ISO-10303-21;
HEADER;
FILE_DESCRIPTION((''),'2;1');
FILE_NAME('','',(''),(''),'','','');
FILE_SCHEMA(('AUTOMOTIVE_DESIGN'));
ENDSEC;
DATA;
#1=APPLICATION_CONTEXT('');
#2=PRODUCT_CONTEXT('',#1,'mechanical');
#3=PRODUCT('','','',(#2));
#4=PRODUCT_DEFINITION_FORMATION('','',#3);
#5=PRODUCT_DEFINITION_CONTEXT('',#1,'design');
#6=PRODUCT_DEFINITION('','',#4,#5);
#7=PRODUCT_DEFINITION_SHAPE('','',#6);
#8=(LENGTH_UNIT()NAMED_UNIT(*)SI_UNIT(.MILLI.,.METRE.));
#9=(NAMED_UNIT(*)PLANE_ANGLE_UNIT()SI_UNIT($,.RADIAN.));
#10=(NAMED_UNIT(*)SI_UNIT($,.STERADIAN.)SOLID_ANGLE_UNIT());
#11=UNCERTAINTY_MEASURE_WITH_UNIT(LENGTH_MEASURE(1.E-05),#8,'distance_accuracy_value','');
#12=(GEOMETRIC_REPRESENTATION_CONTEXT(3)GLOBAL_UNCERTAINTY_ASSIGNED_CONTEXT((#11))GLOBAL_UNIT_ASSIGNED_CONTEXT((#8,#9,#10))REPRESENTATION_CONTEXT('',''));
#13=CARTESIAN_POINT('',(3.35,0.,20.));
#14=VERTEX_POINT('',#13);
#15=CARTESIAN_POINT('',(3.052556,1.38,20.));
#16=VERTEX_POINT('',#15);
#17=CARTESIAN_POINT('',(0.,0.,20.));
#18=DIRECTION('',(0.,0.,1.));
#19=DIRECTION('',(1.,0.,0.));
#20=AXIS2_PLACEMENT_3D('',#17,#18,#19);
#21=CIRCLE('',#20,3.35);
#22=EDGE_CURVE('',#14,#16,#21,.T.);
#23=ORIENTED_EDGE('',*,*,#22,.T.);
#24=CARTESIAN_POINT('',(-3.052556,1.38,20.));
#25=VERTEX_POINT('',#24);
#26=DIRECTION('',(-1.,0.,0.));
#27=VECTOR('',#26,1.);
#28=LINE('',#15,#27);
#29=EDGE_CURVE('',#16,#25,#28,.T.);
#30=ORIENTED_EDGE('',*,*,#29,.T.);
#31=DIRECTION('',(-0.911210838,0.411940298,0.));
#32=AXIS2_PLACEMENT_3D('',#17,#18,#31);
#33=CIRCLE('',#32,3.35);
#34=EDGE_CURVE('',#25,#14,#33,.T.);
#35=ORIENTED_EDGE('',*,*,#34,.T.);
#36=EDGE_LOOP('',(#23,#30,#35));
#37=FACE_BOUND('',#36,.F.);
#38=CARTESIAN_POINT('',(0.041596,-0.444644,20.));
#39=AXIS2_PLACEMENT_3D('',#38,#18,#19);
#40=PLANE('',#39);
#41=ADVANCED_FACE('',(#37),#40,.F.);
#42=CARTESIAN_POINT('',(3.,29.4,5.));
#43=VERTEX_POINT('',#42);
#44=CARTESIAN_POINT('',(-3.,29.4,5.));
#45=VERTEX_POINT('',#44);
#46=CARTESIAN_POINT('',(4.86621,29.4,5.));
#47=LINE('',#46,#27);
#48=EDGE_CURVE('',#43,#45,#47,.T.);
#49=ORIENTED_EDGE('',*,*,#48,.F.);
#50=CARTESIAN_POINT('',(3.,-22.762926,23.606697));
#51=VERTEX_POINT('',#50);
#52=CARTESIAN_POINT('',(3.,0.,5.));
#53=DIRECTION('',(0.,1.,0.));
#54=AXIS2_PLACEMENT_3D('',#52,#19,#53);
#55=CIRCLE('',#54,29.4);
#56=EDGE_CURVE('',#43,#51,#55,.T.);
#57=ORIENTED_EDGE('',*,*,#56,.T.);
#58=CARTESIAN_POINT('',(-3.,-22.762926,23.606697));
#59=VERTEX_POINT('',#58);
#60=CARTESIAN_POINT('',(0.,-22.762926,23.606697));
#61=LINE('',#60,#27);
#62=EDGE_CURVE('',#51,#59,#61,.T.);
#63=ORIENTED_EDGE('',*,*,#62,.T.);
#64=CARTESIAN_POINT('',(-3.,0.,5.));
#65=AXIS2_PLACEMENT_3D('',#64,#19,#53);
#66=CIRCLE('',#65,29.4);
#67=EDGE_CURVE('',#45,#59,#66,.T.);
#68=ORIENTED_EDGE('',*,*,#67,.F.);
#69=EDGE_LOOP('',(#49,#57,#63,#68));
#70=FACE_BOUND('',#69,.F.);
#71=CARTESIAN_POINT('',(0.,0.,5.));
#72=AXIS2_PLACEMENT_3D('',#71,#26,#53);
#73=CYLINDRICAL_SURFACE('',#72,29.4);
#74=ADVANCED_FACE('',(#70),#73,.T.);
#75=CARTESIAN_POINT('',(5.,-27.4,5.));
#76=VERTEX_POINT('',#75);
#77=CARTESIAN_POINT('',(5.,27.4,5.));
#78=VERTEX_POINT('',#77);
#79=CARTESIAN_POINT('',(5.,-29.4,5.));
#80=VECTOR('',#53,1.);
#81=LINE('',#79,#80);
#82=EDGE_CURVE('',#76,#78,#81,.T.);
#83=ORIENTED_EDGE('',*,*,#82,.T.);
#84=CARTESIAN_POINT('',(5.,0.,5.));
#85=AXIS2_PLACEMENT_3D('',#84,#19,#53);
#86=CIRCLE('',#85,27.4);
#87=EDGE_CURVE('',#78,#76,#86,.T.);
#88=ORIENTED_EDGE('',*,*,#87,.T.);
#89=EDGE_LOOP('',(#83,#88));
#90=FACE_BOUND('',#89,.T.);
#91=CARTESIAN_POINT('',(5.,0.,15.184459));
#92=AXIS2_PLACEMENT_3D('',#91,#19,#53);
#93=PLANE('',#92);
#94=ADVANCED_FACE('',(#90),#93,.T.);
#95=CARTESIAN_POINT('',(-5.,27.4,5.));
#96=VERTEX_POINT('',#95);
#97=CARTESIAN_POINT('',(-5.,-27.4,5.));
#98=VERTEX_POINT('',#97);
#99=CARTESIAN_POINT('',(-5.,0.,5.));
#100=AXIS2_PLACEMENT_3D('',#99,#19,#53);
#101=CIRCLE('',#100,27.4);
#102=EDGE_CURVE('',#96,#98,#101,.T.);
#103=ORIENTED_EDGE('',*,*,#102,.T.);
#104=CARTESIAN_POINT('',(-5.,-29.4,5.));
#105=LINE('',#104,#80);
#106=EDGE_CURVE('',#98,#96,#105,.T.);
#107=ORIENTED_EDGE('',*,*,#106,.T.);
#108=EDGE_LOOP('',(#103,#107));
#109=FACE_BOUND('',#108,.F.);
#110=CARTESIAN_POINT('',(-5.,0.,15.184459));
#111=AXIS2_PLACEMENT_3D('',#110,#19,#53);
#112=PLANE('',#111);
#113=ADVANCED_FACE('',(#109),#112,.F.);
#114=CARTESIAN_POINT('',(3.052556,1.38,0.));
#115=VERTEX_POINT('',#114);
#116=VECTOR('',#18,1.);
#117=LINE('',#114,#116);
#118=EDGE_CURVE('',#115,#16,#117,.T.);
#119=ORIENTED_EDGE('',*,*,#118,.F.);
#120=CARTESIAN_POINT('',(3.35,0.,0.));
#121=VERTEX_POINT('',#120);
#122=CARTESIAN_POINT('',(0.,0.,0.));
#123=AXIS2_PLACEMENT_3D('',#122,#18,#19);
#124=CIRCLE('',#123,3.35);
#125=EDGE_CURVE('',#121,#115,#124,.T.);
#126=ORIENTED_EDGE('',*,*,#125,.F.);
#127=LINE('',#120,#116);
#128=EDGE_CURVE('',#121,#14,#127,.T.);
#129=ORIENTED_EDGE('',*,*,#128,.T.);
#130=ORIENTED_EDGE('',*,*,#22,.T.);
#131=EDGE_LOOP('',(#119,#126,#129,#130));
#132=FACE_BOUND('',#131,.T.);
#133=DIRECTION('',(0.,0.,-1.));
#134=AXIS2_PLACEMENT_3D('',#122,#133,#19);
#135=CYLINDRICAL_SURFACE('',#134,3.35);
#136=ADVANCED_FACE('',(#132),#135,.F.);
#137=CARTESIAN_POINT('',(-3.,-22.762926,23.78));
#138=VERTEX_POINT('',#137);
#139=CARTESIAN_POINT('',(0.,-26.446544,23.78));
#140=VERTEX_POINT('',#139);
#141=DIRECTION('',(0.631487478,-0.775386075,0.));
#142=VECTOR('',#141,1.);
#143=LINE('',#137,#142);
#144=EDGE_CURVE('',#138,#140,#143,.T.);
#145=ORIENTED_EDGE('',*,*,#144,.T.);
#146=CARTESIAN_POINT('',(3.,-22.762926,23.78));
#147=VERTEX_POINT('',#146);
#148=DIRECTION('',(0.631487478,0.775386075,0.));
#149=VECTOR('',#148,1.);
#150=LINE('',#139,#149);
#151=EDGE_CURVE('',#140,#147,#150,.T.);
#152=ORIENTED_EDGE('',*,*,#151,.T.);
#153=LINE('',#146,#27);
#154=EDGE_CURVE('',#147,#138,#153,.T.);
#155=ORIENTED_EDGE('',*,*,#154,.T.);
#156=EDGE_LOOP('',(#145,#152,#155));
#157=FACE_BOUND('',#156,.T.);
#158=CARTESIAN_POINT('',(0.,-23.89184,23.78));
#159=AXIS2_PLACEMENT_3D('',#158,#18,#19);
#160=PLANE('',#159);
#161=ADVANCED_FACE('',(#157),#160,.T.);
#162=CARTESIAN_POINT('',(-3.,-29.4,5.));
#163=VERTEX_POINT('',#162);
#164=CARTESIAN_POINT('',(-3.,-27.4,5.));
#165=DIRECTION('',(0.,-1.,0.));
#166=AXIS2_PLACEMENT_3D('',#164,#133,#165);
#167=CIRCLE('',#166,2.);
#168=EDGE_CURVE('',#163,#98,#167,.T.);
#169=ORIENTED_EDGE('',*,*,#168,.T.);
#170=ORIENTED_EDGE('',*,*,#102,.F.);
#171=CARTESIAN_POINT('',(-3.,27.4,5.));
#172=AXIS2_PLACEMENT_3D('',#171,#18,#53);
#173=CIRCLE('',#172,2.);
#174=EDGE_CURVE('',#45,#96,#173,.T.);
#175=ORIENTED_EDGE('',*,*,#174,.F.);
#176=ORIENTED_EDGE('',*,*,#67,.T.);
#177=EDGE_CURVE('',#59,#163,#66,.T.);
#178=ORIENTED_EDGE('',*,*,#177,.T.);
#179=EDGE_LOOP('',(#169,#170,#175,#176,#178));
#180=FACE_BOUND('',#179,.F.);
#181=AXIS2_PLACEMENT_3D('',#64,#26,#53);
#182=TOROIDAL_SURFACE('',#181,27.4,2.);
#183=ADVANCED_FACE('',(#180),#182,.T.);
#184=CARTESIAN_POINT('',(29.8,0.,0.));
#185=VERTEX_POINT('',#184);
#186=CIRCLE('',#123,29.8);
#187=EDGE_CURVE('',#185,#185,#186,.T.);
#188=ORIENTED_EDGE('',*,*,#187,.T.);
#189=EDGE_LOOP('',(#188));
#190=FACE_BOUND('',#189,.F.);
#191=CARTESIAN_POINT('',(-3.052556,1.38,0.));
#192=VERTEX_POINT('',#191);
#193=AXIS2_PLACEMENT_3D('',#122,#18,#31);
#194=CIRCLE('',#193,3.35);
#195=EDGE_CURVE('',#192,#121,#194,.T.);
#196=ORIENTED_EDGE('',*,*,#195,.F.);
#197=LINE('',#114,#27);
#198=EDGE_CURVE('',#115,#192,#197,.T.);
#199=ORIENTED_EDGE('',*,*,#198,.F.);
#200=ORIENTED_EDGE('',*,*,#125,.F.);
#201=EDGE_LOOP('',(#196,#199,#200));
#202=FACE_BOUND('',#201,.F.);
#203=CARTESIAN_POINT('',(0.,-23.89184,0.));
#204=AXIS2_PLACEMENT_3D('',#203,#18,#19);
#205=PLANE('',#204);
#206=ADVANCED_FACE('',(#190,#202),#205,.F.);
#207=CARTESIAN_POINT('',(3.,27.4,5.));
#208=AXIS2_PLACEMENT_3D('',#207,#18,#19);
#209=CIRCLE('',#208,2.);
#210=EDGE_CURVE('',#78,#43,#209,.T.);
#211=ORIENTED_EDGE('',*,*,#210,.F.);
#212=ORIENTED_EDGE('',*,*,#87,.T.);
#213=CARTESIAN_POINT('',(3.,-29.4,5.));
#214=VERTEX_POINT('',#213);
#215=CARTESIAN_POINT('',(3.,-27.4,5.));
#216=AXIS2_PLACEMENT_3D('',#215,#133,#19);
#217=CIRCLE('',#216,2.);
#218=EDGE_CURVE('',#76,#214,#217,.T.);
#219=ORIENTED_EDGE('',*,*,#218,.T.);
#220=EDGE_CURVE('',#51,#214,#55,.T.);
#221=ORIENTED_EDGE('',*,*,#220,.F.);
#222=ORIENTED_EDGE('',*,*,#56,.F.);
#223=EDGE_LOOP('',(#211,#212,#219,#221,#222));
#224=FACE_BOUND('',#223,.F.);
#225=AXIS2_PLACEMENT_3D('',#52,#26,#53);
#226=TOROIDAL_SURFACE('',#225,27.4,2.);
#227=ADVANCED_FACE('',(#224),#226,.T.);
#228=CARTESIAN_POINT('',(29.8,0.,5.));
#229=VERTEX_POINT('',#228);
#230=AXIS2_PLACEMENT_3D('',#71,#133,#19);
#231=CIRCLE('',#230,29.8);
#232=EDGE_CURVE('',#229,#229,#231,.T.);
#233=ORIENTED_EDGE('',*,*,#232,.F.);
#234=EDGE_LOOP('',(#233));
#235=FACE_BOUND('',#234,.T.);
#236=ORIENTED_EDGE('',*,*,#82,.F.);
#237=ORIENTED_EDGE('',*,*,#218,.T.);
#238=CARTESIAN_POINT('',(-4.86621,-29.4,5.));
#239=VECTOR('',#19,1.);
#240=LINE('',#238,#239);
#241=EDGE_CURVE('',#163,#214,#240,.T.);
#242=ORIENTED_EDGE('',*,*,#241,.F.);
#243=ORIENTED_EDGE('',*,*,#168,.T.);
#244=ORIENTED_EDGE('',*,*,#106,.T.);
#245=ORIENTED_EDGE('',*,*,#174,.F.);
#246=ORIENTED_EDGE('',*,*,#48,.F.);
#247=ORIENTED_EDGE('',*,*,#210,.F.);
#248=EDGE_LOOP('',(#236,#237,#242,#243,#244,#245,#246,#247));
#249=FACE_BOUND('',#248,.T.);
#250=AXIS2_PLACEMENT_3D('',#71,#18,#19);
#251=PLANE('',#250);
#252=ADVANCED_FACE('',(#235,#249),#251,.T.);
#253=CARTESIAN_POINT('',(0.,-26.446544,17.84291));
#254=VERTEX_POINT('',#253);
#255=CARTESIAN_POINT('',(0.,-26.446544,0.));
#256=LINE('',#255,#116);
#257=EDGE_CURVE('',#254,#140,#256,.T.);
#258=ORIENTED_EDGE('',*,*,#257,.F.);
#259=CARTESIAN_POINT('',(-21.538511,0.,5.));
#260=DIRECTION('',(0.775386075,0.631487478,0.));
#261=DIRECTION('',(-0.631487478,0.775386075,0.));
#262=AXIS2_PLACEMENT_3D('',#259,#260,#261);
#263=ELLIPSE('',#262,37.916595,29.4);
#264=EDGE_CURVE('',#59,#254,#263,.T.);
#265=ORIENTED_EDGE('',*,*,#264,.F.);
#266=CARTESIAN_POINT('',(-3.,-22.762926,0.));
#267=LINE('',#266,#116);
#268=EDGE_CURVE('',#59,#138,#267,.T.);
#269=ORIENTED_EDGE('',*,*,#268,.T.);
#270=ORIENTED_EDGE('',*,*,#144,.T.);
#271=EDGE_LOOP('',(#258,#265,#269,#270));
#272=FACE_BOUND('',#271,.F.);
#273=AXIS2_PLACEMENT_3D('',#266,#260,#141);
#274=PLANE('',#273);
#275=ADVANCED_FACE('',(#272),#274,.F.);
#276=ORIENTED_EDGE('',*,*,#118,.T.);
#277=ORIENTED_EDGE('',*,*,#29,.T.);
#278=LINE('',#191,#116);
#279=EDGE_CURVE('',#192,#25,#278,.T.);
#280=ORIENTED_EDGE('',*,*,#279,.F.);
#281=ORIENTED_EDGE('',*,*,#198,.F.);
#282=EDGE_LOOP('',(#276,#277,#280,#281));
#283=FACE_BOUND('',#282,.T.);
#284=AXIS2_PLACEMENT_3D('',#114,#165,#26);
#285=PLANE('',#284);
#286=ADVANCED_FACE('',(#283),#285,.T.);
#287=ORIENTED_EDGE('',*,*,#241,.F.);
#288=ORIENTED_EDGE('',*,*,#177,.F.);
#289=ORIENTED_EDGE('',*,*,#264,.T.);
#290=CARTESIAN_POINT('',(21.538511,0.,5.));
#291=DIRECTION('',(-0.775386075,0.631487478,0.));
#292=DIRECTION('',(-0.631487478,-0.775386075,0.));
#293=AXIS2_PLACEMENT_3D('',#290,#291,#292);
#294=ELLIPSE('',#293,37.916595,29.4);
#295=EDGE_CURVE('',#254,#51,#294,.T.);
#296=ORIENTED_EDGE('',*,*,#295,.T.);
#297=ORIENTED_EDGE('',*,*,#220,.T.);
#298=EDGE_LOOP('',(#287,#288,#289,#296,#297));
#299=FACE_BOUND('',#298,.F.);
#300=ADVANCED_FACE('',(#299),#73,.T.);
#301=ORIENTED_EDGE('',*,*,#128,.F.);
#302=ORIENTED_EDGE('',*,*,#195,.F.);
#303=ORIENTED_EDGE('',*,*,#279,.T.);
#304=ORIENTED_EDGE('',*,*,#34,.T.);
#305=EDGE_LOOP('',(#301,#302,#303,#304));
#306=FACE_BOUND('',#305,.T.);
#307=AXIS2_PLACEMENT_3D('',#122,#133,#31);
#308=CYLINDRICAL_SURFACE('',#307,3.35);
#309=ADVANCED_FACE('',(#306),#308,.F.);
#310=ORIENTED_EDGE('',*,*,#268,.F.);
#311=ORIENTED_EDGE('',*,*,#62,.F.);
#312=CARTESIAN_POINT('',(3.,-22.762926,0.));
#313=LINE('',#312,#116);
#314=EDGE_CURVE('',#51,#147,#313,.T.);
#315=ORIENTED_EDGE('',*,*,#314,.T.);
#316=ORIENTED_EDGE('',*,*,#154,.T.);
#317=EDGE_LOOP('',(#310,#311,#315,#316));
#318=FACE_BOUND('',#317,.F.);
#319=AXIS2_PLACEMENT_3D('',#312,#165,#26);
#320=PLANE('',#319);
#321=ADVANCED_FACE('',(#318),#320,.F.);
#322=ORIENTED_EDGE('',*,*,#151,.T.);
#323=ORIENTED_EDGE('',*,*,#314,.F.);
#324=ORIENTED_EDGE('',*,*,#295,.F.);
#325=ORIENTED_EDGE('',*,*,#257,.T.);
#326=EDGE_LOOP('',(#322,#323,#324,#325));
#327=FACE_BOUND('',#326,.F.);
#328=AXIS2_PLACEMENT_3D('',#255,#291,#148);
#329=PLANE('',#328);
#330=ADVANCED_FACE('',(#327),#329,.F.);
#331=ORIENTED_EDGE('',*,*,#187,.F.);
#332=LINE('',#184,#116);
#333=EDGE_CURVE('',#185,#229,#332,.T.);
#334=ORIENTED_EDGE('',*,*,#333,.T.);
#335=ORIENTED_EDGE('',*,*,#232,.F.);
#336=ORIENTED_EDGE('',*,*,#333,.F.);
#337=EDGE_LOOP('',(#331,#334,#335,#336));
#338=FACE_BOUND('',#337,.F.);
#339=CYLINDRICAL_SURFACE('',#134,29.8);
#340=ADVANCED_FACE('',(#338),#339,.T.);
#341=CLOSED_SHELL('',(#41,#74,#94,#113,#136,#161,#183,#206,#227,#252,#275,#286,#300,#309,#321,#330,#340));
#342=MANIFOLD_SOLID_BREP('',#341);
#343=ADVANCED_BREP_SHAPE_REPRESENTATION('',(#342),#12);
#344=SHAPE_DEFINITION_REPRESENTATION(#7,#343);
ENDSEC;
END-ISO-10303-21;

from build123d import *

# Parameters (mm, degrees)
F0_R          = 29.8
F1_DEPTH      = 5
F3_DEPTH      = 5
F3_DEPTH_BACK = 5
F5_DEPTH      = 20
F6_DEPTH      = 23.78
F7_T2_ANGLE   = 180
F7_T4_ANGLE   = 180


# Not quite as in the source:
# - a fillet or chamfer that OpenCascade refuses, or shapes differently, is made with other operations: its cross-section is extruded or revolved along the edge and cut away or added


with BuildPart() as f1:
    # F0 (on Top) → F1 (new body)
    with BuildSketch(Plane.XY):
        Circle(F0_R)
        Polygon((0, -26.4465436339), (-3, -22.7629262954), (0, -22.7629262954), (3, -22.7629262954), align=None, mode=Mode.SUBTRACT)
    extrude(amount=F1_DEPTH)

    # F2 (on Right) → F3 (join, two sides)
    with BuildSketch(Plane.YZ) as f3_sk:
        with BuildLine():
            Line((-29.4, 5), (29.4, 5))
            ThreePointArc((29.4, 5), (0, 34.4), (-29.4, 5))
        make_face()
    extrude(amount=-F3_DEPTH)
    extrude(f3_sk.sketch, amount=F3_DEPTH_BACK)

    # F4 (on Top) → F5 (cut)
    with BuildSketch(Plane.XY):
        with BuildLine():
            ThreePointArc((-3.0525563058, 1.38), (-0.7058457252, -3.2747949267), (3.35, 0))
            ThreePointArc((3.35, 0), (3.2747949267, 0.7058457252), (3.0525563058, 1.38))
            Line((3.0525563058, 1.38), (-3.0525563058, 1.38))
        make_face()
    extrude(amount=F5_DEPTH, mode=Mode.SUBTRACT)

    # F0 (on Top) → F6 (join)
    with BuildSketch(Plane.XY):
        Polygon((0, -22.7629262954), (-3, -22.7629262954), (0, -26.4465436339), (3, -22.7629262954), align=None)
    extrude(amount=F6_DEPTH)

    # F7: fillet of radius 2 on 2 edges, made by hand

    # F7_s1 → F7_t2 (revolve, cut)
    with BuildSketch(Plane.XY.offset(5)):
        with BuildLine():
            ThreePointArc((-3, 29.4), (-4.4142135624, 28.8142135624), (-5, 27.4))
            Line((-5, 27.4), (-5, 29.4))
            Line((-5, 29.4), (-3, 29.4))
        make_face()
    revolve(axis=Axis((-5, 0, 5), (1, 0, 0)), revolution_arc=F7_T2_ANGLE, mode=Mode.SUBTRACT)

    # F7_s3 → F7_t4 (revolve, cut)
    with BuildSketch(Plane.XY.offset(5)):
        with BuildLine():
            ThreePointArc((5, 27.4), (4.4142135624, 28.8142135624), (3, 29.4))
            Line((3, 29.4), (5, 29.4))
            Line((5, 29.4), (5, 27.4))
        make_face()
    revolve(axis=Axis((5, 0, 5), (1, 0, 0)), revolution_arc=F7_T4_ANGLE, mode=Mode.SUBTRACT)


solid = f1.part
